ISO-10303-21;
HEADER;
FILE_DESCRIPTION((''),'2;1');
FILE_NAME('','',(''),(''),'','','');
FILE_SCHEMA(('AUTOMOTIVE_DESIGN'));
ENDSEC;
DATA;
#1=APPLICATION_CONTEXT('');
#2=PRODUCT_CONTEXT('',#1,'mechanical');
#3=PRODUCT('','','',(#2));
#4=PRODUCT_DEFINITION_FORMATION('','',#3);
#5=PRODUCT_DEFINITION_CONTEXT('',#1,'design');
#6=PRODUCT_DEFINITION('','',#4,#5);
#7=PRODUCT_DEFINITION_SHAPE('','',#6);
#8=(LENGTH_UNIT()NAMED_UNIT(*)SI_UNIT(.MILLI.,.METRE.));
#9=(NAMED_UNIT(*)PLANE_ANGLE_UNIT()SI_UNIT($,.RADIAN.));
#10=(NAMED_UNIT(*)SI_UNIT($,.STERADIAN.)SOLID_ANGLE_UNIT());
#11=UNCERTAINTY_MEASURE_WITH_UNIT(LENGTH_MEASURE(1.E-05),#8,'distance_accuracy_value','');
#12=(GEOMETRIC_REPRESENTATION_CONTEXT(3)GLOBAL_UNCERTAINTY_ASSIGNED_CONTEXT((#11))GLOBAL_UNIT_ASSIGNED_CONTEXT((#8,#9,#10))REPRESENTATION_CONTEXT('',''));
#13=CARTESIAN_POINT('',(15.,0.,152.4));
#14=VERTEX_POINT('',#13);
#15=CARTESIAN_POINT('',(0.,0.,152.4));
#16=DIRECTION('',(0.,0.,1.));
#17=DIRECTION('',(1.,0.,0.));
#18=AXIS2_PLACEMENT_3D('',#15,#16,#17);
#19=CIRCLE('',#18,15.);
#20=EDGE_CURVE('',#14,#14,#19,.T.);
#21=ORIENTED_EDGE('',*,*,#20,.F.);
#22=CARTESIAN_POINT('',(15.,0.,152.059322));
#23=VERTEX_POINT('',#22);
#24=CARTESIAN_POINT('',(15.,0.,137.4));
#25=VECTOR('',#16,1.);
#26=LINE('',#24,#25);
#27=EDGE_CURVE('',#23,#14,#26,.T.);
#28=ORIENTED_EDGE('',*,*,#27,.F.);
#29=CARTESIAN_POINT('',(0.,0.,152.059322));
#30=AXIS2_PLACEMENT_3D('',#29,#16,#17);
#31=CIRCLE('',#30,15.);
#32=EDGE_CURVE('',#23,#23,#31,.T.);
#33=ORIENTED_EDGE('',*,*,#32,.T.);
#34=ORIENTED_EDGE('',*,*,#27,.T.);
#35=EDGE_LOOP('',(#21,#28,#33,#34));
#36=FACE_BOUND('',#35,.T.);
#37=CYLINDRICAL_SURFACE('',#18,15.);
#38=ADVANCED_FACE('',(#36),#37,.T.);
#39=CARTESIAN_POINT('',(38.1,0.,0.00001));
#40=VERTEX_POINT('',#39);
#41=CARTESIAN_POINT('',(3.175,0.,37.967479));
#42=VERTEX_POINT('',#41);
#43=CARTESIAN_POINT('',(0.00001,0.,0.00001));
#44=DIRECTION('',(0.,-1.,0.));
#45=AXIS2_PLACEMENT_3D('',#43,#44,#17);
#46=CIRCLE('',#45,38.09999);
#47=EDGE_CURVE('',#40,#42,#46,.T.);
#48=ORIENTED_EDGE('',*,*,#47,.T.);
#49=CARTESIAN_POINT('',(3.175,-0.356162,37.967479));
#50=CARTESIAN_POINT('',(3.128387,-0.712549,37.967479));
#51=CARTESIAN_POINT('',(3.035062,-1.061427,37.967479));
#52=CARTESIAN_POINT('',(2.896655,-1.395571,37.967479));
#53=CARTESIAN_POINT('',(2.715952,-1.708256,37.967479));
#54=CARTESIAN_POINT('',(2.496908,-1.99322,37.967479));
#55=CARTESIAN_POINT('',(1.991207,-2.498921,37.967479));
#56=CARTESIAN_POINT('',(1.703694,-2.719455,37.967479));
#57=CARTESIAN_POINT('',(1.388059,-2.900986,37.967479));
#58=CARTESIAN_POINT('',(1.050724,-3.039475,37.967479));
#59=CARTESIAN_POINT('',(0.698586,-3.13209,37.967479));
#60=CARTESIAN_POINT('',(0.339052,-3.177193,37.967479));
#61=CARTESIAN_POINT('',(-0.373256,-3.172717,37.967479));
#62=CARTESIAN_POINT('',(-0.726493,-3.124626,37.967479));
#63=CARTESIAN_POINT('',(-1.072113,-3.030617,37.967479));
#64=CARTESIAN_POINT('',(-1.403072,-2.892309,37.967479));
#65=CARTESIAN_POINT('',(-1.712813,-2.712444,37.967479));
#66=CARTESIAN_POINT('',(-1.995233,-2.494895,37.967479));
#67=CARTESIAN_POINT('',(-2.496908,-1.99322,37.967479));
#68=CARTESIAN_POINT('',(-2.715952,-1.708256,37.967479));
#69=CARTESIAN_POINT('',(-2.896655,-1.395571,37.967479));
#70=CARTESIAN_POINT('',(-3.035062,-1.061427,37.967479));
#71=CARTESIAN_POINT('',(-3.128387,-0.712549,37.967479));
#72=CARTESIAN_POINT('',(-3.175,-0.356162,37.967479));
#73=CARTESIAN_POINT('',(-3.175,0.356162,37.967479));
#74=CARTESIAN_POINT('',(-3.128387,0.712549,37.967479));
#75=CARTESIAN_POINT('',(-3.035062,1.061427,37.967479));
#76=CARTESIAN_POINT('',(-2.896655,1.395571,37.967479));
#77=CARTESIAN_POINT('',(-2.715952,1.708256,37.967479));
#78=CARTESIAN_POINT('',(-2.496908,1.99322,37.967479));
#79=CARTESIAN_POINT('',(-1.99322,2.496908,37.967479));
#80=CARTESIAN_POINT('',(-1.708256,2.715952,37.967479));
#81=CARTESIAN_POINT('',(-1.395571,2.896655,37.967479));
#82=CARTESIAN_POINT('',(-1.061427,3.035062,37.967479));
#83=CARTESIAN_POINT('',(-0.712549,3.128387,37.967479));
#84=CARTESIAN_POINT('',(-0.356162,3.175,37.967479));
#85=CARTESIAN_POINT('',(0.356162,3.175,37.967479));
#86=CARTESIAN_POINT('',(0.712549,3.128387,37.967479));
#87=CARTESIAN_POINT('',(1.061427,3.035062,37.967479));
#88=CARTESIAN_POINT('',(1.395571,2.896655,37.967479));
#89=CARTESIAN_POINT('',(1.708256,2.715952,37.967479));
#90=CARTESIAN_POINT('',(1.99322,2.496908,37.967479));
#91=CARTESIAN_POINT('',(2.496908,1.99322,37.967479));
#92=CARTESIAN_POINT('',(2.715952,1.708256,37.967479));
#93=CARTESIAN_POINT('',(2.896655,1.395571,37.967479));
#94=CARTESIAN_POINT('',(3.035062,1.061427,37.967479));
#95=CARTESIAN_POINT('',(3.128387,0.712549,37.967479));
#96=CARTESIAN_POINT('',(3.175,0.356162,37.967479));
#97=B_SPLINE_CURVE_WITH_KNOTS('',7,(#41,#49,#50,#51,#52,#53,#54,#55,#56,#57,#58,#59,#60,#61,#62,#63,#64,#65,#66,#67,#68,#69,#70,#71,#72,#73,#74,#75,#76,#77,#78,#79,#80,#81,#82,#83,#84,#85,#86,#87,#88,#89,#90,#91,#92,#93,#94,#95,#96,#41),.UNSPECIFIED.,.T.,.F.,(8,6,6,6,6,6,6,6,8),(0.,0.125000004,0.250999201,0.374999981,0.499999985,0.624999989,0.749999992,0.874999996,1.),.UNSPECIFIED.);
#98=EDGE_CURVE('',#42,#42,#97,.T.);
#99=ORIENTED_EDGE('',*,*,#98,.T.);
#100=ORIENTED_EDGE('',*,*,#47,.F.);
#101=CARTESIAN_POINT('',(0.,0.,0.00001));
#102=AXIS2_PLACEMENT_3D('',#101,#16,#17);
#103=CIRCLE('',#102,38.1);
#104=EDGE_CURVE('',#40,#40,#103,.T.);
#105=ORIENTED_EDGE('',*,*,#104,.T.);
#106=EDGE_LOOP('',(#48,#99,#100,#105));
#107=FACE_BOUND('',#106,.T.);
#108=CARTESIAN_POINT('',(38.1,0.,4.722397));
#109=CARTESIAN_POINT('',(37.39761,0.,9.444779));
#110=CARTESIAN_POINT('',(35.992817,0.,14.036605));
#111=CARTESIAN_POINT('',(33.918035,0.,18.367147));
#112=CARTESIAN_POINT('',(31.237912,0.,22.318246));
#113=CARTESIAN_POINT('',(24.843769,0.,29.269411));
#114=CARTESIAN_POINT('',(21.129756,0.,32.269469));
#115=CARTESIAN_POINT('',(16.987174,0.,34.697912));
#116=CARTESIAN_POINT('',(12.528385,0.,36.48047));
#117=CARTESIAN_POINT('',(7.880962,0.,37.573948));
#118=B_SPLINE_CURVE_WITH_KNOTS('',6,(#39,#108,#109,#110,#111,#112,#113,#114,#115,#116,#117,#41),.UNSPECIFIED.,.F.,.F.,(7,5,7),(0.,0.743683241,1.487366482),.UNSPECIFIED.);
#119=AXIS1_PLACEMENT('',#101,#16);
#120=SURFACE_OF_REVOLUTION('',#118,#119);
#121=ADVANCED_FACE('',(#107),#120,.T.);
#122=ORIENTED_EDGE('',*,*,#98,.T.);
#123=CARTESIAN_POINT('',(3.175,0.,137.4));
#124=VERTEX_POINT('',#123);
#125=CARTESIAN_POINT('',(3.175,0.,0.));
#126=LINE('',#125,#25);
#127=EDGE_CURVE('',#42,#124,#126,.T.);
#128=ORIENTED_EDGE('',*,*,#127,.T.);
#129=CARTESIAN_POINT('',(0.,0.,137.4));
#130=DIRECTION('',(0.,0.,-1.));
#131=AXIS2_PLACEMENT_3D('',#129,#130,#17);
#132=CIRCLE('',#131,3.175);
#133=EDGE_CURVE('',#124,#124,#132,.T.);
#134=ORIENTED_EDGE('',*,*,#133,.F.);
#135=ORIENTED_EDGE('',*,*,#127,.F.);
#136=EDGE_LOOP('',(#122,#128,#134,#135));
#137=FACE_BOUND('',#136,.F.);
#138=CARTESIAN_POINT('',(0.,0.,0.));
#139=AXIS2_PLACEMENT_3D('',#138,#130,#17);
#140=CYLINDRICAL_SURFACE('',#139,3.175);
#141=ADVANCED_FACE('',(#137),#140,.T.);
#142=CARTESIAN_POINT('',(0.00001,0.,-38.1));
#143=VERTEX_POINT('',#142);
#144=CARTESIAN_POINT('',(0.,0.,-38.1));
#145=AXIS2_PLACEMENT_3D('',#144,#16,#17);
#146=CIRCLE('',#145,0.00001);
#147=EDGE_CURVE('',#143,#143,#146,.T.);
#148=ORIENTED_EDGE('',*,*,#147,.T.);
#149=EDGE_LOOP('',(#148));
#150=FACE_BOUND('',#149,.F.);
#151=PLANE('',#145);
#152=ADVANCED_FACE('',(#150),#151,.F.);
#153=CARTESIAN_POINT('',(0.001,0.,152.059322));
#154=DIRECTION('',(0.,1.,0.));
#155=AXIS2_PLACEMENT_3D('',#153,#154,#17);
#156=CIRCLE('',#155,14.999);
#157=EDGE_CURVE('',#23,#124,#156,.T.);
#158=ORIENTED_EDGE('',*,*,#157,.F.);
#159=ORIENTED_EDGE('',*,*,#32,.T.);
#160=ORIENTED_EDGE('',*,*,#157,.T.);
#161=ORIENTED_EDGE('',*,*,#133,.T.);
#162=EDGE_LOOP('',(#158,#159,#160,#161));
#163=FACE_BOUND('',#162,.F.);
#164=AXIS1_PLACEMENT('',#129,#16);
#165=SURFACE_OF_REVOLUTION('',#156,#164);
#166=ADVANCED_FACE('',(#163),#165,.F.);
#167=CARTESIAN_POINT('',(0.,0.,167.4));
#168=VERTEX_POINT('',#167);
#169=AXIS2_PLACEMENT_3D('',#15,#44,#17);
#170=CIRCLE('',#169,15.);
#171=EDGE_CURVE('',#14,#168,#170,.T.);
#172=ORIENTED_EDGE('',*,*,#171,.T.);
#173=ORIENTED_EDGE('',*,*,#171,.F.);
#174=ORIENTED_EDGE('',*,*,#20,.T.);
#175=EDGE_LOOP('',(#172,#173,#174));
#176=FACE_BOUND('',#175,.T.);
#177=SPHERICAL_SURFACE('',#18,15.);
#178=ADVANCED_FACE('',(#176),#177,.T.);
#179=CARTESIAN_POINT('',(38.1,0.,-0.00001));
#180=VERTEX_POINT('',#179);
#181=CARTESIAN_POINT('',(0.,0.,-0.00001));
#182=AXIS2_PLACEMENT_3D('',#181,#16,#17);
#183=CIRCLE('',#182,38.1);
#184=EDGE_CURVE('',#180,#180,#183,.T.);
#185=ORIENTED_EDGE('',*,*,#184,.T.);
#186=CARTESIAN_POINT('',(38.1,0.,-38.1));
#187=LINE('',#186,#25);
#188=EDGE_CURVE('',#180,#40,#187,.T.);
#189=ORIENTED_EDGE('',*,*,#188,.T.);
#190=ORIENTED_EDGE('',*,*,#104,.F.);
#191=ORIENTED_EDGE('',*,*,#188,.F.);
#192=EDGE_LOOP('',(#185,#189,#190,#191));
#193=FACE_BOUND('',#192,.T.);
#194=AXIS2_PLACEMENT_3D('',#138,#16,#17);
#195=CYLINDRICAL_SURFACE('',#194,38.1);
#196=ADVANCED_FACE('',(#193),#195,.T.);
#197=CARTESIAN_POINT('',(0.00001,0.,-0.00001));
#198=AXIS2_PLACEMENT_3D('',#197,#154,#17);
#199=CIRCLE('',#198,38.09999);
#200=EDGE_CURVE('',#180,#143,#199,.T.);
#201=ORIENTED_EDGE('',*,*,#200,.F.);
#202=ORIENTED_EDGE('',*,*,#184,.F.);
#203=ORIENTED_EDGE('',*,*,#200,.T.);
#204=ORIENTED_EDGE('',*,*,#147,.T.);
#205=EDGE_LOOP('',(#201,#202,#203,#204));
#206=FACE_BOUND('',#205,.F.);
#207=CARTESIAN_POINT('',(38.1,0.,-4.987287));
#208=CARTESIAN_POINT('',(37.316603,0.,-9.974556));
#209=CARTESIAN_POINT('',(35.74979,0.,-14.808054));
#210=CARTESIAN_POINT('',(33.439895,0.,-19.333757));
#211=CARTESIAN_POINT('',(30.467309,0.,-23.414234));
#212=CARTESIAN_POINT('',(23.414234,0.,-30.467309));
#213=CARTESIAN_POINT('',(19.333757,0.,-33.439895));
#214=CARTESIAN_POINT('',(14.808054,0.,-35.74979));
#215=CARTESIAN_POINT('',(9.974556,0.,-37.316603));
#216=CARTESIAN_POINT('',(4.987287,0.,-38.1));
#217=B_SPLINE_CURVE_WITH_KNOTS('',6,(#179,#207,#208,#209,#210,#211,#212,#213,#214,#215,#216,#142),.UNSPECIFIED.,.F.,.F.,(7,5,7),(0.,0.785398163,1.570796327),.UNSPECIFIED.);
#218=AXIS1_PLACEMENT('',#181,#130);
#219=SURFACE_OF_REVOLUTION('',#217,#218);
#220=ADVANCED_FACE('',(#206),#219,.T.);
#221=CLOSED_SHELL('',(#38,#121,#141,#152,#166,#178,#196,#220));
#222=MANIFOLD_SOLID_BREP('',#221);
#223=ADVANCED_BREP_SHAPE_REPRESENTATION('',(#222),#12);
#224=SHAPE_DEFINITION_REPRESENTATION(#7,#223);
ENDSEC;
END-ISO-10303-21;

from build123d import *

# Parameters (mm, degrees)
F0_R          = 38.1
F1_DEPTH      = 38.1
F1_DEPTH_BACK = 38.1
F2_R          = 38.09999
F3_R          = 38.09999
F4_R          = 3.175
F5_DEPTH      = 152.4
F6_R          = 15
F7_DEPTH      = 15
F7_DEPTH_BACK = 15
F8_R          = 15


# Not quite as in the source:
# - a fillet or chamfer that OpenCascade refuses, or shapes differently, is made with other operations: its cross-section is extruded or revolved along the edge and cut away or added
# - a fillet or chamfer is up to 0.001 mm smaller than in the source, because OpenCascade refuses the exact size
# - the program builds the solid bodies; features that only make, move or delete a surface that nothing else refers to are left out


with BuildPart() as f1:
    # F0 (on Top) → F1 (new body, two sides)
    with BuildSketch(Plane.XY) as f1_sk:
        Circle(F0_R)
    extrude(amount=F1_DEPTH)
    extrude(f1_sk.sketch, amount=-F1_DEPTH_BACK)

    # F2 (radius 38.1 in the source; OpenCascade refuses exactly that, so slightly less here)
    f2_edges = [f1.edges().sort_by_distance(p)[0] for p in [
        (-38.1, 0, 38.1),
    ]]
    fillet(f2_edges, radius=F2_R)

    # F3 (radius 38.1 in the source; OpenCascade refuses exactly that, so slightly less here)
    f3_edges = [f1.edges().sort_by_distance(p)[0] for p in [
        (-38.1, 0, -38.1),
    ]]
    fillet(f3_edges, radius=F3_R)

    # F4 (on Top) → F5 (join)
    with BuildSketch(Plane.XY):
        Circle(F4_R)
    extrude(amount=F5_DEPTH)

    # F6 (on face) → F7 (join, two sides)
    with BuildSketch(Plane.XY.offset(152.4)) as f7_sk:
        Circle(F6_R)
    extrude(amount=F7_DEPTH)
    extrude(f7_sk.sketch, amount=-F7_DEPTH_BACK)

    # F8
    f8_edges = [f1.edges().sort_by_distance(p)[0] for p in [
        (-15, 0, 167.4),
    ]]
    fillet(f8_edges, radius=F8_R)

    # F9: fillet of radius 14.999 on 1 edges, made by hand

    # F9_s1 → F9_t2 (revolve, cut)
    with BuildSketch(Plane.XZ):
        with BuildLine():
            ThreePointArc((15, 152.0593221194), (11.6752628675, 142.6422319372), (3.175, 137.4))
            Line((3.175, 137.4), (15, 137.4))
            Line((15, 137.4), (15, 152.0593221194))
        make_face()
    revolve(axis=Axis((0, 0, 137.4), (0, 0, 1)), mode=Mode.SUBTRACT)


solid = f1.part
